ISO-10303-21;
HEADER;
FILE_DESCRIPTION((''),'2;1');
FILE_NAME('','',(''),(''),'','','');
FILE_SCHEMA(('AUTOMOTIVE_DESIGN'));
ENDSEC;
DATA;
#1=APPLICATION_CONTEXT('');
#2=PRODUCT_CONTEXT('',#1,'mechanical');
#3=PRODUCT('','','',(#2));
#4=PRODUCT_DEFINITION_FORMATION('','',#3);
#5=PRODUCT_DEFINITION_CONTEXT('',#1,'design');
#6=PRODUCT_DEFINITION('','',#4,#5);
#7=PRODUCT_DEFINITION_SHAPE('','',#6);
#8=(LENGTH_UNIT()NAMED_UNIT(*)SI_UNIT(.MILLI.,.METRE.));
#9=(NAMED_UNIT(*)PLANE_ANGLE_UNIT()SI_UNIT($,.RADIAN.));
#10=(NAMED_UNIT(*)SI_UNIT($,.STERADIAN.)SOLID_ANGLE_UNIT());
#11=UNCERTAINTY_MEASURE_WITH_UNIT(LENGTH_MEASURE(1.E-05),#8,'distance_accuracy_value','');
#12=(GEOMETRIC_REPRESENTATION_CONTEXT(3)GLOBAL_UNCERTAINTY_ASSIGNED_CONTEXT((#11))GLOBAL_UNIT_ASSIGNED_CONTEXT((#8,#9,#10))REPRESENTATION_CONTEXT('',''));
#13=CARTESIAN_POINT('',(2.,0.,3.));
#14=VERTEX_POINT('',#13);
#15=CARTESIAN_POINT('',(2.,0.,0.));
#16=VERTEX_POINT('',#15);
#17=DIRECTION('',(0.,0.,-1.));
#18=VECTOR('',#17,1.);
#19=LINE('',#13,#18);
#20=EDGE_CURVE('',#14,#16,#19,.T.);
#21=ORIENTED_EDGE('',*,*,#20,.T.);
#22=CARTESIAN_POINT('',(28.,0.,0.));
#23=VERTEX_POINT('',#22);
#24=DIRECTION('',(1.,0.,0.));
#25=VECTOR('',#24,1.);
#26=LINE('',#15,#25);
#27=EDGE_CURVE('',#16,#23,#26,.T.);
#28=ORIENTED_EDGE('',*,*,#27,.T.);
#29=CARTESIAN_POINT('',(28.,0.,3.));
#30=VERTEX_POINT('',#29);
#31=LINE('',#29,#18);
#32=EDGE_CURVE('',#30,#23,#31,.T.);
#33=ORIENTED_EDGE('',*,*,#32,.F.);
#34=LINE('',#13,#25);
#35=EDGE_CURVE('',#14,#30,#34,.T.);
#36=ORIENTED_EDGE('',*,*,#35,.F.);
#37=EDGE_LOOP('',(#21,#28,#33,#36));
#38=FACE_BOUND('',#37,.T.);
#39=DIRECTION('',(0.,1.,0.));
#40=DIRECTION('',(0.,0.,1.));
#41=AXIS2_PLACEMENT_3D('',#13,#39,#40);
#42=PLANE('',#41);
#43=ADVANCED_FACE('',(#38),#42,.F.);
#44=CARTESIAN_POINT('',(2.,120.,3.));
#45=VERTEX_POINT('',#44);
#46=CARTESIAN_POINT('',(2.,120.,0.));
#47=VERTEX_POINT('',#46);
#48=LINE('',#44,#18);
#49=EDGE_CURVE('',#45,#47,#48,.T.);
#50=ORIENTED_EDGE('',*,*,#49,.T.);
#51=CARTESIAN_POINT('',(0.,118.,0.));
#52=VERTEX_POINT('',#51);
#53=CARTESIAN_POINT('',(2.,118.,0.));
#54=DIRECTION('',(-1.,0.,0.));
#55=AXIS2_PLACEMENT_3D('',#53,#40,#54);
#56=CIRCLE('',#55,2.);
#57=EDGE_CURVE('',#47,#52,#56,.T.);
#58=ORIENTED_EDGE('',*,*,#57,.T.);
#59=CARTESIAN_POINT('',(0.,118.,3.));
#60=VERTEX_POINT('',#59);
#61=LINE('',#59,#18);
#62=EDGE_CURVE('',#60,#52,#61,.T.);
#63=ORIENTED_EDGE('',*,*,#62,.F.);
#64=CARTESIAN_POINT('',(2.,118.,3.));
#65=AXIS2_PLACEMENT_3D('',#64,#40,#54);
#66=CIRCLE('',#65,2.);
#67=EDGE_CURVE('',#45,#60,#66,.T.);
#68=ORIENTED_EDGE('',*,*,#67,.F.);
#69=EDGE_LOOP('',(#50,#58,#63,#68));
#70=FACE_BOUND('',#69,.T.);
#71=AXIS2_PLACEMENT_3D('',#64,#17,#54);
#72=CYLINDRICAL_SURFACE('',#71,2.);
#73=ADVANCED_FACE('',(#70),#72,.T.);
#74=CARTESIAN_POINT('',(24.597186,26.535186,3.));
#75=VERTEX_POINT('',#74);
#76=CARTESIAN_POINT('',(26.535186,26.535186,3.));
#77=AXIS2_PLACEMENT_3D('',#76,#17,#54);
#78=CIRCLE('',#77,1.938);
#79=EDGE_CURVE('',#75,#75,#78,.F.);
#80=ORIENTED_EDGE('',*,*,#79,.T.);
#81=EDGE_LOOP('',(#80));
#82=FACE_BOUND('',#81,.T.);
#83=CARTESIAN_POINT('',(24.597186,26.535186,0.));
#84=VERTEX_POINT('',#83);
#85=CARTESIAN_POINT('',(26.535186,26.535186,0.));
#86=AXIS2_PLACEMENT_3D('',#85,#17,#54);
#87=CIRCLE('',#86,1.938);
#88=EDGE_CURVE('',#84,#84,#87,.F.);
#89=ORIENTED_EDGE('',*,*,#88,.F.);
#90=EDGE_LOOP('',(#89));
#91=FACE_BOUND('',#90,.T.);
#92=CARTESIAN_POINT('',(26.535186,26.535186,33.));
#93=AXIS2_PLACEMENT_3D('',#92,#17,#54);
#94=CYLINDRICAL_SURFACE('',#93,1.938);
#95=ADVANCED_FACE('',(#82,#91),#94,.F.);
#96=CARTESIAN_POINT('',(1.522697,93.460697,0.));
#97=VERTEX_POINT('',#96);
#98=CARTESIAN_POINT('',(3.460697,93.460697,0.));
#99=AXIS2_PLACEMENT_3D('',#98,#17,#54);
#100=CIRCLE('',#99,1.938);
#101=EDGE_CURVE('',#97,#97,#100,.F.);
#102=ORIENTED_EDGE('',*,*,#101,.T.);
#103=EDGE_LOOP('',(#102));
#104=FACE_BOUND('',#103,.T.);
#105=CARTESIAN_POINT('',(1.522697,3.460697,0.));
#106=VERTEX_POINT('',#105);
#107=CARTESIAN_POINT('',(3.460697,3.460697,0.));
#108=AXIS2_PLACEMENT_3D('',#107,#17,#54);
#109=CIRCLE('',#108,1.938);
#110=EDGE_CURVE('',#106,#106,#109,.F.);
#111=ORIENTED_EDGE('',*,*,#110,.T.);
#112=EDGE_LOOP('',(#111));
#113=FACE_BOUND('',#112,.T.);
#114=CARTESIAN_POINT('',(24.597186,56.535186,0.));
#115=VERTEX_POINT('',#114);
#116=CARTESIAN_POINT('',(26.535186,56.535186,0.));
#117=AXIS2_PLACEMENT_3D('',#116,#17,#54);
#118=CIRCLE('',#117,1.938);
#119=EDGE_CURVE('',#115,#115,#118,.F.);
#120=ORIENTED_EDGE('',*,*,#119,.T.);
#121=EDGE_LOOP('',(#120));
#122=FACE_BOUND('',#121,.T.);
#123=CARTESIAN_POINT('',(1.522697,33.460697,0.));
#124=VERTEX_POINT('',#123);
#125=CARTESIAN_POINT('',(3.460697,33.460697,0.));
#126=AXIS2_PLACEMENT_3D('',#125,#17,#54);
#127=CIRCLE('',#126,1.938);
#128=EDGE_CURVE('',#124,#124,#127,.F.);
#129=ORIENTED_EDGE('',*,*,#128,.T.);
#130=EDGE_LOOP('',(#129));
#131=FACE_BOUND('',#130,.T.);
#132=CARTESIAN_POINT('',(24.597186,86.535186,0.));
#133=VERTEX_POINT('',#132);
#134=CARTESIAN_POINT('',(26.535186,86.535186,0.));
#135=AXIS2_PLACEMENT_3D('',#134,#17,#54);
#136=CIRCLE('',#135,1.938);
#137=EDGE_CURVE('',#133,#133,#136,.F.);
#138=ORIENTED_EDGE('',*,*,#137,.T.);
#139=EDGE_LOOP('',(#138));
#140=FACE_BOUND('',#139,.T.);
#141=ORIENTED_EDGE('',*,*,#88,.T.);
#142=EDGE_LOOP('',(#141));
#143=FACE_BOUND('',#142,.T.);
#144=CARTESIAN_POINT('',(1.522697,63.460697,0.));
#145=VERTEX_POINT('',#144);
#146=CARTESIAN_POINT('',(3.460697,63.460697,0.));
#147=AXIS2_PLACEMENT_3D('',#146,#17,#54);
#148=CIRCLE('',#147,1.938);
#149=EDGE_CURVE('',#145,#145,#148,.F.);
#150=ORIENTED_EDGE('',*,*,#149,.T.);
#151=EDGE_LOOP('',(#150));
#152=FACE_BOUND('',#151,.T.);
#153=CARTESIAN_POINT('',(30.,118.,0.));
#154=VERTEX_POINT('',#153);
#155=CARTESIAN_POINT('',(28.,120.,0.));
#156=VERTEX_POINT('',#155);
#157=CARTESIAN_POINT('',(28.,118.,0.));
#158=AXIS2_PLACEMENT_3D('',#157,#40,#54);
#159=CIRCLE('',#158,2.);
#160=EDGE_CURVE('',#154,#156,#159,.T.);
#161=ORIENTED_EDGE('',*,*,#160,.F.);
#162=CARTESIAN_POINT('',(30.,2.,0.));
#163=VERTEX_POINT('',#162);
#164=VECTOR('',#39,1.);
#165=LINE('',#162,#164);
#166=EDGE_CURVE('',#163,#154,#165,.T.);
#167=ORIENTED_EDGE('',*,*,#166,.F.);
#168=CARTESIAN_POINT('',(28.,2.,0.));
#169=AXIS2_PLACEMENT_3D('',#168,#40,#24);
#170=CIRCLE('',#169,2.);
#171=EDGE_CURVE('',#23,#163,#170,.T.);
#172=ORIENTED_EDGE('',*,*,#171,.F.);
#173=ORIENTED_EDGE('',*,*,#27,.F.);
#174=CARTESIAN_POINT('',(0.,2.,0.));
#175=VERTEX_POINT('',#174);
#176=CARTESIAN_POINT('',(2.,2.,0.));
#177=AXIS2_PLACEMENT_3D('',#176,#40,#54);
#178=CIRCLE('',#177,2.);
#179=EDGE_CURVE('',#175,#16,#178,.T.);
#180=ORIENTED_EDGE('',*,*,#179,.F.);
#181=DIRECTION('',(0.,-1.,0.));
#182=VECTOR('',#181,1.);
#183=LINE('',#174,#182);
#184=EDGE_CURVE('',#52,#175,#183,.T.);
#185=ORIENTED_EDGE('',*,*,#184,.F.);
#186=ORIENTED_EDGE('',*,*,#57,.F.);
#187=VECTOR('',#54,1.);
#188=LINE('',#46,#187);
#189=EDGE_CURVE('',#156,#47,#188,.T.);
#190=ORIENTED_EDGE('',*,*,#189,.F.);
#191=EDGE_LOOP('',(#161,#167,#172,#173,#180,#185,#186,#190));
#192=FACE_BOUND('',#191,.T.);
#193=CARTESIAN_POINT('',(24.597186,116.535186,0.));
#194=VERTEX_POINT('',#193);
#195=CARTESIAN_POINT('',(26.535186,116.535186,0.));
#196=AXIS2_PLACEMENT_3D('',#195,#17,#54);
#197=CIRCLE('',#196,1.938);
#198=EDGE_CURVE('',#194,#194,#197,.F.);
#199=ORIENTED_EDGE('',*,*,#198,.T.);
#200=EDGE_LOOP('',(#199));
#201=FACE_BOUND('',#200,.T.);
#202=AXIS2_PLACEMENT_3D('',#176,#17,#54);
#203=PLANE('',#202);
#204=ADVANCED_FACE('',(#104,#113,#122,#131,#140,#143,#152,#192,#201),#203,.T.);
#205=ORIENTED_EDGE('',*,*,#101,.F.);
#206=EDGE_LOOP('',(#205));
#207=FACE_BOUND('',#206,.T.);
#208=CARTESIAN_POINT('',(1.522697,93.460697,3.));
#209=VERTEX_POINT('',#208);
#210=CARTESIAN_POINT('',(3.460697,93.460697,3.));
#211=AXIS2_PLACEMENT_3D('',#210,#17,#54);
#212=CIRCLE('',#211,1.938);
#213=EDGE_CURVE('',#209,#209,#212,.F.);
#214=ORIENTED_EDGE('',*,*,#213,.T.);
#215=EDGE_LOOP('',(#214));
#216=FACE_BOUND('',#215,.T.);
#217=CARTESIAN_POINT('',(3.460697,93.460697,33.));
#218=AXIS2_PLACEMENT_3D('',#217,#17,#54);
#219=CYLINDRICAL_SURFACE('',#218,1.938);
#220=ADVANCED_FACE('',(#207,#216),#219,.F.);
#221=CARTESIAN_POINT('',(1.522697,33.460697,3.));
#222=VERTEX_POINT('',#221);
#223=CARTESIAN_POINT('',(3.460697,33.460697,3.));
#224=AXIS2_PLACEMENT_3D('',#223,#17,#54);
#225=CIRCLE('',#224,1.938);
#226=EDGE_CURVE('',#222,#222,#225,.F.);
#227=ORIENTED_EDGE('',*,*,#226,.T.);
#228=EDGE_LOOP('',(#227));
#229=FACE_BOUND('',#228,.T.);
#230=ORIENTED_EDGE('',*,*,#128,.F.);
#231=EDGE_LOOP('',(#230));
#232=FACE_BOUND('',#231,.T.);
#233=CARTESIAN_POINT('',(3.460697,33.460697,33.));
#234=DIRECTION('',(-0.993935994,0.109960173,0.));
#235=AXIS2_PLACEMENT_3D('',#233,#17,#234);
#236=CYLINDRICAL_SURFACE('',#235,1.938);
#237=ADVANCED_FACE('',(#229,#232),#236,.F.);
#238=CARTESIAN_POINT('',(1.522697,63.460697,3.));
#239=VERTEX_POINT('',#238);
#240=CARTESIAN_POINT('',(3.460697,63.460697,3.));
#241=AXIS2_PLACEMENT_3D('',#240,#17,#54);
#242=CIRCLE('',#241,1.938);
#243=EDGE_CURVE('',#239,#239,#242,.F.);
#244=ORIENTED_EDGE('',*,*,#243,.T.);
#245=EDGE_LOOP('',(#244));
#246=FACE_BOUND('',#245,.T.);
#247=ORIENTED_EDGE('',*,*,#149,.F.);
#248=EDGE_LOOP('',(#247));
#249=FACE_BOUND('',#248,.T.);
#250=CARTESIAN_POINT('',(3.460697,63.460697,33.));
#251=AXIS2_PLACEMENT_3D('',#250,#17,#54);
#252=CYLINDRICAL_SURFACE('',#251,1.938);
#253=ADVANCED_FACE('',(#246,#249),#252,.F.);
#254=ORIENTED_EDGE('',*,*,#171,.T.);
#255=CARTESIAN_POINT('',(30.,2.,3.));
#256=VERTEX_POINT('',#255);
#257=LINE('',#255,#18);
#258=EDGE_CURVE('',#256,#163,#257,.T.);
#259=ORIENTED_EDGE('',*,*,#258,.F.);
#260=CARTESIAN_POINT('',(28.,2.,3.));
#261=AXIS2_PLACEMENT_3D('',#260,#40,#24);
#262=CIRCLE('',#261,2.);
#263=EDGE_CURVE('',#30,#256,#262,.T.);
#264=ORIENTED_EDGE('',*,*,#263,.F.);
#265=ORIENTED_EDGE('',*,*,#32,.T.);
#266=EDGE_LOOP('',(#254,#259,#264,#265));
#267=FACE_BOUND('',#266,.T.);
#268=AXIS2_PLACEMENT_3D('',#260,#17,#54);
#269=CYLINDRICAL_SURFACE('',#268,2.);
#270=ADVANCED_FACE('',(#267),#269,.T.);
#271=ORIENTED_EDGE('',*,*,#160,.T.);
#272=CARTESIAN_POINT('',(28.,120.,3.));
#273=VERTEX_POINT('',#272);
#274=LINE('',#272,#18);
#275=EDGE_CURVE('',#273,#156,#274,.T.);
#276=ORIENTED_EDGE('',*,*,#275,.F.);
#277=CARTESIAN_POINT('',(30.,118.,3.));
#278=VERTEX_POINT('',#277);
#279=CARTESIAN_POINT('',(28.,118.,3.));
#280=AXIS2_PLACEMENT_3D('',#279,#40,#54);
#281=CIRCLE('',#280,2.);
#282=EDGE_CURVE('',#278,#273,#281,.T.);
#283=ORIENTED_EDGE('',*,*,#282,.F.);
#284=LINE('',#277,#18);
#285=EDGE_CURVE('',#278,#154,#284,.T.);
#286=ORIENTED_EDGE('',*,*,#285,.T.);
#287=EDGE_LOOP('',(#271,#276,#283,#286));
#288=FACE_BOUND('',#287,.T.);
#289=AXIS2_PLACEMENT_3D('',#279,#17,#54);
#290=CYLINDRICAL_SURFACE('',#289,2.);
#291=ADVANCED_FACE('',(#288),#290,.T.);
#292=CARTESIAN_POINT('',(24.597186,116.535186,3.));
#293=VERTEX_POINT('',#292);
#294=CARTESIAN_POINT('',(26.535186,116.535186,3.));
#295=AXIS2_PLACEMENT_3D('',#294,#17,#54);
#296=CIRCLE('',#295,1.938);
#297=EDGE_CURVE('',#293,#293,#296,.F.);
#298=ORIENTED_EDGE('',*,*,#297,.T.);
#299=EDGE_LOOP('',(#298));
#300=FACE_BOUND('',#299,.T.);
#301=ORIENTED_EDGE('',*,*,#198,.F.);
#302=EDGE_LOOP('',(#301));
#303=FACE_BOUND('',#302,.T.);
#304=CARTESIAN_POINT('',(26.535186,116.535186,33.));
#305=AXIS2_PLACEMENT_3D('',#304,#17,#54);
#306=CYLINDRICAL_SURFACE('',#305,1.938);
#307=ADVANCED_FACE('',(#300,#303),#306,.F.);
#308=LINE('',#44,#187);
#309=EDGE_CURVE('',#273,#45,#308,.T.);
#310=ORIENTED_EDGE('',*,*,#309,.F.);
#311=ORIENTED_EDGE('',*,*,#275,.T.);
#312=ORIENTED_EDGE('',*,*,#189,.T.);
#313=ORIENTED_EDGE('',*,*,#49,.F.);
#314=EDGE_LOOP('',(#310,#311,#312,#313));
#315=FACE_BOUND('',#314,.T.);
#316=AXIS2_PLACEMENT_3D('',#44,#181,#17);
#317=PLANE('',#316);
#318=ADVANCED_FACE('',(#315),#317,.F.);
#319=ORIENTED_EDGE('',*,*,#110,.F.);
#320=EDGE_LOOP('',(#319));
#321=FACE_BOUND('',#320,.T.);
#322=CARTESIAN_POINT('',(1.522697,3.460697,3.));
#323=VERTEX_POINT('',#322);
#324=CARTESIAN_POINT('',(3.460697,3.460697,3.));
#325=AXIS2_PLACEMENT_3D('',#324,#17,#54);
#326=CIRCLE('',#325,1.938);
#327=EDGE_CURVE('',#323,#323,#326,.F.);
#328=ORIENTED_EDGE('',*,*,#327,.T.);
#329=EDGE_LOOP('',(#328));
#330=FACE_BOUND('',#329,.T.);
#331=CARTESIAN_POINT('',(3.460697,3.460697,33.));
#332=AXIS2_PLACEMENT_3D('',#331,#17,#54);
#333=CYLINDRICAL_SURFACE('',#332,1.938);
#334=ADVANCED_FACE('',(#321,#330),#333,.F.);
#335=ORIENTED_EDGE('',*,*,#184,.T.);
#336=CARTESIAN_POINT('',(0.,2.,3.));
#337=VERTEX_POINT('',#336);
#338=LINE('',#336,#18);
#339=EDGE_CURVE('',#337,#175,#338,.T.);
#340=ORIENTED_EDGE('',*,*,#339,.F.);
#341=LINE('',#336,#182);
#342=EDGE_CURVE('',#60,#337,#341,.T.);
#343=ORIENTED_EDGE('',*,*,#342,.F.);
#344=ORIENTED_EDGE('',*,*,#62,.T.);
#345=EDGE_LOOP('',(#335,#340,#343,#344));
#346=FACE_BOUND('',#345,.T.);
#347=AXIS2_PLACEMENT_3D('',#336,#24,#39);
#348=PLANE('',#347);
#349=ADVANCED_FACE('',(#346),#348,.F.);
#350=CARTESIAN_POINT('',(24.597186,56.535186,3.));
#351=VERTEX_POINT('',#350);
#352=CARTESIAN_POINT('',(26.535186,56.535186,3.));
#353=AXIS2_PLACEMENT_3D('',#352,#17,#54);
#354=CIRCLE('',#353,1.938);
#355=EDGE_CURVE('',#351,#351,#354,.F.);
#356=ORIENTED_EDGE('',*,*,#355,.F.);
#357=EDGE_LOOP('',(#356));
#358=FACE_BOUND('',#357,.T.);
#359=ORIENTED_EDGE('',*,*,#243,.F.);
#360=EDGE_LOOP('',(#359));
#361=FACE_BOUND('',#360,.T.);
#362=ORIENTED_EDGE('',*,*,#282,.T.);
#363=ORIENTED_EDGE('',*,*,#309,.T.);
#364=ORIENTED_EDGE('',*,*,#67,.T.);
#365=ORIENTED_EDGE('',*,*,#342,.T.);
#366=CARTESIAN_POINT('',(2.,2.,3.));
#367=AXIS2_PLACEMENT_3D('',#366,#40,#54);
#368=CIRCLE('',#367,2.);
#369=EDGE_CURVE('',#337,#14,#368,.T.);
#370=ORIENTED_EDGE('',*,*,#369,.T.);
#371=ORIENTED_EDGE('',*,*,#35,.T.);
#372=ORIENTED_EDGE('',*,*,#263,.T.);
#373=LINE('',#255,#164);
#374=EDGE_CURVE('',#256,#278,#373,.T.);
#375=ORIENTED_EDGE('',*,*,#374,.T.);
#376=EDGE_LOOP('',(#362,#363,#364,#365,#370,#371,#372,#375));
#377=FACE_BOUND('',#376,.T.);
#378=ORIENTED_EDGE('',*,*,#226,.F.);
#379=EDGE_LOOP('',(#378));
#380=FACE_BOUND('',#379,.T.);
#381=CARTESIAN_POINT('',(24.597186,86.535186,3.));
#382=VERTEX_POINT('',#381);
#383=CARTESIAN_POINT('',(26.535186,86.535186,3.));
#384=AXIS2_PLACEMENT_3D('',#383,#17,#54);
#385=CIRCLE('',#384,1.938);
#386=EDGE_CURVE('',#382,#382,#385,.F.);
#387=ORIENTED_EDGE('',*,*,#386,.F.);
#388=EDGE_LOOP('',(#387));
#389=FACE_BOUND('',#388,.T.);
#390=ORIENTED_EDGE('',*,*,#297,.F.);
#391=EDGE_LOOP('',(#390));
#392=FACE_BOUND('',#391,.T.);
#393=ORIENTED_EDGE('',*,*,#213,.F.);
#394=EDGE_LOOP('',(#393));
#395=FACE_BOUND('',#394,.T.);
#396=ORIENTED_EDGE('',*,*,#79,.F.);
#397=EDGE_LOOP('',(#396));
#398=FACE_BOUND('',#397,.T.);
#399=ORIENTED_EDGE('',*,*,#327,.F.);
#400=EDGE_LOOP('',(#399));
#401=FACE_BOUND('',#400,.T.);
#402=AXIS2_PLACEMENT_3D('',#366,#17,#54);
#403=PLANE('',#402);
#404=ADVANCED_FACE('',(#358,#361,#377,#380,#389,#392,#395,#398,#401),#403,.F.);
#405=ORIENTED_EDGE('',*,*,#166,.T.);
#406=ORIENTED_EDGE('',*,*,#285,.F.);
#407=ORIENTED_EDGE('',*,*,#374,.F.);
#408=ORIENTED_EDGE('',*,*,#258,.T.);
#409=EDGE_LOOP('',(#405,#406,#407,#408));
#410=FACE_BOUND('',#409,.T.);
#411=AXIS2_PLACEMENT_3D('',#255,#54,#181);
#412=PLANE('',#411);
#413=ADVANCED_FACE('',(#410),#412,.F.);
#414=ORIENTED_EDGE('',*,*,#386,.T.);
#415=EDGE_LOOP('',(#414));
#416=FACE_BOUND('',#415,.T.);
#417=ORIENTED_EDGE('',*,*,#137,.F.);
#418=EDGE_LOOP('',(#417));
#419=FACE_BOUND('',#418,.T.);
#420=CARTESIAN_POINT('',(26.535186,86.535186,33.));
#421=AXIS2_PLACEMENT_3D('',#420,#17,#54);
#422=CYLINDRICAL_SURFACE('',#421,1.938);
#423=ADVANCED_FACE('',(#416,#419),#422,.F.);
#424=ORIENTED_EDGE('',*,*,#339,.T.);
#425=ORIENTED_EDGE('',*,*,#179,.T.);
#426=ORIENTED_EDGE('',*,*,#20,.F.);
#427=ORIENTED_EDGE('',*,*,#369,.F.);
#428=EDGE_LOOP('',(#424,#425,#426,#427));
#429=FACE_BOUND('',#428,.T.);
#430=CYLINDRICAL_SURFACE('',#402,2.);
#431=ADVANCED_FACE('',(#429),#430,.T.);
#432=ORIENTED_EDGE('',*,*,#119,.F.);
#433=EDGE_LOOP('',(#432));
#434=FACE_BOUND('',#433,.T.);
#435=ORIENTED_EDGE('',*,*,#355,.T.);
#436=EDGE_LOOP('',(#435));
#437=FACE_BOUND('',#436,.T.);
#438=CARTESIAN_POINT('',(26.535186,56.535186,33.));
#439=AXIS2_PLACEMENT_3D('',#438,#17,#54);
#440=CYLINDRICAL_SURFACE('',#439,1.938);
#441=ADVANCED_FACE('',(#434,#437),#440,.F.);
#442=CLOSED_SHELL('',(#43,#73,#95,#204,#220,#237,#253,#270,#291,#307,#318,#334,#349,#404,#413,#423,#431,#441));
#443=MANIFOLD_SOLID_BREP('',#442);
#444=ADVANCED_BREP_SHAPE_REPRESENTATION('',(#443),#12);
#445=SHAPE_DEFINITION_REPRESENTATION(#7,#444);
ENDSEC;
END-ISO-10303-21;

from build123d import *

# Parameters (mm, degrees)
BOSS_EXTRU_1_DEPTH   = 3
EMPREINTE1_OUTLINE_R = 1.938
EMPREINTE1_DEPTH     = 3


# Read off the part's stored shape, not the designer's step: Empreinte1
with BuildPart() as part:
    # Esquisse1 → Boss.-Extru.1 (new body)
    with BuildSketch(Plane.XY):
        with BuildLine():
            Line((2, 0), (28, 0))
            ThreePointArc((28, 0), (29.414213562, 0.585786438), (30, 2))
            Line((30, 2), (30, 118))
            ThreePointArc((30, 118), (29.414213562, 119.414213562), (28, 120))
            Line((28, 120), (2, 120))
            ThreePointArc((2, 120), (0.585786438, 119.414213562), (0, 118))
            Line((0, 118), (0, 2))
            ThreePointArc((0, 2), (0.585786438, 0.585786438), (2, 0))
        make_face()
    extrude(amount=BOSS_EXTRU_1_DEPTH)

    # Empreinte1 outline → Empreinte1 (cut)
    with BuildSketch(Plane.XY):
        with Locations((26.535185944, 116.535185944)):
            Circle(EMPREINTE1_OUTLINE_R)
        with Locations((3.460697179, 93.460697179)):
            Circle(EMPREINTE1_OUTLINE_R)
        with Locations((26.535185944, 86.535185944)):
            Circle(EMPREINTE1_OUTLINE_R)
        with Locations((3.460697179, 63.460697179)):
            Circle(EMPREINTE1_OUTLINE_R)
        with Locations((26.535185944, 56.535185944)):
            Circle(EMPREINTE1_OUTLINE_R)
        with Locations((3.460697179, 33.460697179)):
            Circle(EMPREINTE1_OUTLINE_R)
        with Locations((26.535185944, 26.535185944)):
            Circle(EMPREINTE1_OUTLINE_R)
        with Locations((3.460697179, 3.460697179)):
            Circle(EMPREINTE1_OUTLINE_R)
    extrude(amount=EMPREINTE1_DEPTH, mode=Mode.SUBTRACT)


solid = part.part
